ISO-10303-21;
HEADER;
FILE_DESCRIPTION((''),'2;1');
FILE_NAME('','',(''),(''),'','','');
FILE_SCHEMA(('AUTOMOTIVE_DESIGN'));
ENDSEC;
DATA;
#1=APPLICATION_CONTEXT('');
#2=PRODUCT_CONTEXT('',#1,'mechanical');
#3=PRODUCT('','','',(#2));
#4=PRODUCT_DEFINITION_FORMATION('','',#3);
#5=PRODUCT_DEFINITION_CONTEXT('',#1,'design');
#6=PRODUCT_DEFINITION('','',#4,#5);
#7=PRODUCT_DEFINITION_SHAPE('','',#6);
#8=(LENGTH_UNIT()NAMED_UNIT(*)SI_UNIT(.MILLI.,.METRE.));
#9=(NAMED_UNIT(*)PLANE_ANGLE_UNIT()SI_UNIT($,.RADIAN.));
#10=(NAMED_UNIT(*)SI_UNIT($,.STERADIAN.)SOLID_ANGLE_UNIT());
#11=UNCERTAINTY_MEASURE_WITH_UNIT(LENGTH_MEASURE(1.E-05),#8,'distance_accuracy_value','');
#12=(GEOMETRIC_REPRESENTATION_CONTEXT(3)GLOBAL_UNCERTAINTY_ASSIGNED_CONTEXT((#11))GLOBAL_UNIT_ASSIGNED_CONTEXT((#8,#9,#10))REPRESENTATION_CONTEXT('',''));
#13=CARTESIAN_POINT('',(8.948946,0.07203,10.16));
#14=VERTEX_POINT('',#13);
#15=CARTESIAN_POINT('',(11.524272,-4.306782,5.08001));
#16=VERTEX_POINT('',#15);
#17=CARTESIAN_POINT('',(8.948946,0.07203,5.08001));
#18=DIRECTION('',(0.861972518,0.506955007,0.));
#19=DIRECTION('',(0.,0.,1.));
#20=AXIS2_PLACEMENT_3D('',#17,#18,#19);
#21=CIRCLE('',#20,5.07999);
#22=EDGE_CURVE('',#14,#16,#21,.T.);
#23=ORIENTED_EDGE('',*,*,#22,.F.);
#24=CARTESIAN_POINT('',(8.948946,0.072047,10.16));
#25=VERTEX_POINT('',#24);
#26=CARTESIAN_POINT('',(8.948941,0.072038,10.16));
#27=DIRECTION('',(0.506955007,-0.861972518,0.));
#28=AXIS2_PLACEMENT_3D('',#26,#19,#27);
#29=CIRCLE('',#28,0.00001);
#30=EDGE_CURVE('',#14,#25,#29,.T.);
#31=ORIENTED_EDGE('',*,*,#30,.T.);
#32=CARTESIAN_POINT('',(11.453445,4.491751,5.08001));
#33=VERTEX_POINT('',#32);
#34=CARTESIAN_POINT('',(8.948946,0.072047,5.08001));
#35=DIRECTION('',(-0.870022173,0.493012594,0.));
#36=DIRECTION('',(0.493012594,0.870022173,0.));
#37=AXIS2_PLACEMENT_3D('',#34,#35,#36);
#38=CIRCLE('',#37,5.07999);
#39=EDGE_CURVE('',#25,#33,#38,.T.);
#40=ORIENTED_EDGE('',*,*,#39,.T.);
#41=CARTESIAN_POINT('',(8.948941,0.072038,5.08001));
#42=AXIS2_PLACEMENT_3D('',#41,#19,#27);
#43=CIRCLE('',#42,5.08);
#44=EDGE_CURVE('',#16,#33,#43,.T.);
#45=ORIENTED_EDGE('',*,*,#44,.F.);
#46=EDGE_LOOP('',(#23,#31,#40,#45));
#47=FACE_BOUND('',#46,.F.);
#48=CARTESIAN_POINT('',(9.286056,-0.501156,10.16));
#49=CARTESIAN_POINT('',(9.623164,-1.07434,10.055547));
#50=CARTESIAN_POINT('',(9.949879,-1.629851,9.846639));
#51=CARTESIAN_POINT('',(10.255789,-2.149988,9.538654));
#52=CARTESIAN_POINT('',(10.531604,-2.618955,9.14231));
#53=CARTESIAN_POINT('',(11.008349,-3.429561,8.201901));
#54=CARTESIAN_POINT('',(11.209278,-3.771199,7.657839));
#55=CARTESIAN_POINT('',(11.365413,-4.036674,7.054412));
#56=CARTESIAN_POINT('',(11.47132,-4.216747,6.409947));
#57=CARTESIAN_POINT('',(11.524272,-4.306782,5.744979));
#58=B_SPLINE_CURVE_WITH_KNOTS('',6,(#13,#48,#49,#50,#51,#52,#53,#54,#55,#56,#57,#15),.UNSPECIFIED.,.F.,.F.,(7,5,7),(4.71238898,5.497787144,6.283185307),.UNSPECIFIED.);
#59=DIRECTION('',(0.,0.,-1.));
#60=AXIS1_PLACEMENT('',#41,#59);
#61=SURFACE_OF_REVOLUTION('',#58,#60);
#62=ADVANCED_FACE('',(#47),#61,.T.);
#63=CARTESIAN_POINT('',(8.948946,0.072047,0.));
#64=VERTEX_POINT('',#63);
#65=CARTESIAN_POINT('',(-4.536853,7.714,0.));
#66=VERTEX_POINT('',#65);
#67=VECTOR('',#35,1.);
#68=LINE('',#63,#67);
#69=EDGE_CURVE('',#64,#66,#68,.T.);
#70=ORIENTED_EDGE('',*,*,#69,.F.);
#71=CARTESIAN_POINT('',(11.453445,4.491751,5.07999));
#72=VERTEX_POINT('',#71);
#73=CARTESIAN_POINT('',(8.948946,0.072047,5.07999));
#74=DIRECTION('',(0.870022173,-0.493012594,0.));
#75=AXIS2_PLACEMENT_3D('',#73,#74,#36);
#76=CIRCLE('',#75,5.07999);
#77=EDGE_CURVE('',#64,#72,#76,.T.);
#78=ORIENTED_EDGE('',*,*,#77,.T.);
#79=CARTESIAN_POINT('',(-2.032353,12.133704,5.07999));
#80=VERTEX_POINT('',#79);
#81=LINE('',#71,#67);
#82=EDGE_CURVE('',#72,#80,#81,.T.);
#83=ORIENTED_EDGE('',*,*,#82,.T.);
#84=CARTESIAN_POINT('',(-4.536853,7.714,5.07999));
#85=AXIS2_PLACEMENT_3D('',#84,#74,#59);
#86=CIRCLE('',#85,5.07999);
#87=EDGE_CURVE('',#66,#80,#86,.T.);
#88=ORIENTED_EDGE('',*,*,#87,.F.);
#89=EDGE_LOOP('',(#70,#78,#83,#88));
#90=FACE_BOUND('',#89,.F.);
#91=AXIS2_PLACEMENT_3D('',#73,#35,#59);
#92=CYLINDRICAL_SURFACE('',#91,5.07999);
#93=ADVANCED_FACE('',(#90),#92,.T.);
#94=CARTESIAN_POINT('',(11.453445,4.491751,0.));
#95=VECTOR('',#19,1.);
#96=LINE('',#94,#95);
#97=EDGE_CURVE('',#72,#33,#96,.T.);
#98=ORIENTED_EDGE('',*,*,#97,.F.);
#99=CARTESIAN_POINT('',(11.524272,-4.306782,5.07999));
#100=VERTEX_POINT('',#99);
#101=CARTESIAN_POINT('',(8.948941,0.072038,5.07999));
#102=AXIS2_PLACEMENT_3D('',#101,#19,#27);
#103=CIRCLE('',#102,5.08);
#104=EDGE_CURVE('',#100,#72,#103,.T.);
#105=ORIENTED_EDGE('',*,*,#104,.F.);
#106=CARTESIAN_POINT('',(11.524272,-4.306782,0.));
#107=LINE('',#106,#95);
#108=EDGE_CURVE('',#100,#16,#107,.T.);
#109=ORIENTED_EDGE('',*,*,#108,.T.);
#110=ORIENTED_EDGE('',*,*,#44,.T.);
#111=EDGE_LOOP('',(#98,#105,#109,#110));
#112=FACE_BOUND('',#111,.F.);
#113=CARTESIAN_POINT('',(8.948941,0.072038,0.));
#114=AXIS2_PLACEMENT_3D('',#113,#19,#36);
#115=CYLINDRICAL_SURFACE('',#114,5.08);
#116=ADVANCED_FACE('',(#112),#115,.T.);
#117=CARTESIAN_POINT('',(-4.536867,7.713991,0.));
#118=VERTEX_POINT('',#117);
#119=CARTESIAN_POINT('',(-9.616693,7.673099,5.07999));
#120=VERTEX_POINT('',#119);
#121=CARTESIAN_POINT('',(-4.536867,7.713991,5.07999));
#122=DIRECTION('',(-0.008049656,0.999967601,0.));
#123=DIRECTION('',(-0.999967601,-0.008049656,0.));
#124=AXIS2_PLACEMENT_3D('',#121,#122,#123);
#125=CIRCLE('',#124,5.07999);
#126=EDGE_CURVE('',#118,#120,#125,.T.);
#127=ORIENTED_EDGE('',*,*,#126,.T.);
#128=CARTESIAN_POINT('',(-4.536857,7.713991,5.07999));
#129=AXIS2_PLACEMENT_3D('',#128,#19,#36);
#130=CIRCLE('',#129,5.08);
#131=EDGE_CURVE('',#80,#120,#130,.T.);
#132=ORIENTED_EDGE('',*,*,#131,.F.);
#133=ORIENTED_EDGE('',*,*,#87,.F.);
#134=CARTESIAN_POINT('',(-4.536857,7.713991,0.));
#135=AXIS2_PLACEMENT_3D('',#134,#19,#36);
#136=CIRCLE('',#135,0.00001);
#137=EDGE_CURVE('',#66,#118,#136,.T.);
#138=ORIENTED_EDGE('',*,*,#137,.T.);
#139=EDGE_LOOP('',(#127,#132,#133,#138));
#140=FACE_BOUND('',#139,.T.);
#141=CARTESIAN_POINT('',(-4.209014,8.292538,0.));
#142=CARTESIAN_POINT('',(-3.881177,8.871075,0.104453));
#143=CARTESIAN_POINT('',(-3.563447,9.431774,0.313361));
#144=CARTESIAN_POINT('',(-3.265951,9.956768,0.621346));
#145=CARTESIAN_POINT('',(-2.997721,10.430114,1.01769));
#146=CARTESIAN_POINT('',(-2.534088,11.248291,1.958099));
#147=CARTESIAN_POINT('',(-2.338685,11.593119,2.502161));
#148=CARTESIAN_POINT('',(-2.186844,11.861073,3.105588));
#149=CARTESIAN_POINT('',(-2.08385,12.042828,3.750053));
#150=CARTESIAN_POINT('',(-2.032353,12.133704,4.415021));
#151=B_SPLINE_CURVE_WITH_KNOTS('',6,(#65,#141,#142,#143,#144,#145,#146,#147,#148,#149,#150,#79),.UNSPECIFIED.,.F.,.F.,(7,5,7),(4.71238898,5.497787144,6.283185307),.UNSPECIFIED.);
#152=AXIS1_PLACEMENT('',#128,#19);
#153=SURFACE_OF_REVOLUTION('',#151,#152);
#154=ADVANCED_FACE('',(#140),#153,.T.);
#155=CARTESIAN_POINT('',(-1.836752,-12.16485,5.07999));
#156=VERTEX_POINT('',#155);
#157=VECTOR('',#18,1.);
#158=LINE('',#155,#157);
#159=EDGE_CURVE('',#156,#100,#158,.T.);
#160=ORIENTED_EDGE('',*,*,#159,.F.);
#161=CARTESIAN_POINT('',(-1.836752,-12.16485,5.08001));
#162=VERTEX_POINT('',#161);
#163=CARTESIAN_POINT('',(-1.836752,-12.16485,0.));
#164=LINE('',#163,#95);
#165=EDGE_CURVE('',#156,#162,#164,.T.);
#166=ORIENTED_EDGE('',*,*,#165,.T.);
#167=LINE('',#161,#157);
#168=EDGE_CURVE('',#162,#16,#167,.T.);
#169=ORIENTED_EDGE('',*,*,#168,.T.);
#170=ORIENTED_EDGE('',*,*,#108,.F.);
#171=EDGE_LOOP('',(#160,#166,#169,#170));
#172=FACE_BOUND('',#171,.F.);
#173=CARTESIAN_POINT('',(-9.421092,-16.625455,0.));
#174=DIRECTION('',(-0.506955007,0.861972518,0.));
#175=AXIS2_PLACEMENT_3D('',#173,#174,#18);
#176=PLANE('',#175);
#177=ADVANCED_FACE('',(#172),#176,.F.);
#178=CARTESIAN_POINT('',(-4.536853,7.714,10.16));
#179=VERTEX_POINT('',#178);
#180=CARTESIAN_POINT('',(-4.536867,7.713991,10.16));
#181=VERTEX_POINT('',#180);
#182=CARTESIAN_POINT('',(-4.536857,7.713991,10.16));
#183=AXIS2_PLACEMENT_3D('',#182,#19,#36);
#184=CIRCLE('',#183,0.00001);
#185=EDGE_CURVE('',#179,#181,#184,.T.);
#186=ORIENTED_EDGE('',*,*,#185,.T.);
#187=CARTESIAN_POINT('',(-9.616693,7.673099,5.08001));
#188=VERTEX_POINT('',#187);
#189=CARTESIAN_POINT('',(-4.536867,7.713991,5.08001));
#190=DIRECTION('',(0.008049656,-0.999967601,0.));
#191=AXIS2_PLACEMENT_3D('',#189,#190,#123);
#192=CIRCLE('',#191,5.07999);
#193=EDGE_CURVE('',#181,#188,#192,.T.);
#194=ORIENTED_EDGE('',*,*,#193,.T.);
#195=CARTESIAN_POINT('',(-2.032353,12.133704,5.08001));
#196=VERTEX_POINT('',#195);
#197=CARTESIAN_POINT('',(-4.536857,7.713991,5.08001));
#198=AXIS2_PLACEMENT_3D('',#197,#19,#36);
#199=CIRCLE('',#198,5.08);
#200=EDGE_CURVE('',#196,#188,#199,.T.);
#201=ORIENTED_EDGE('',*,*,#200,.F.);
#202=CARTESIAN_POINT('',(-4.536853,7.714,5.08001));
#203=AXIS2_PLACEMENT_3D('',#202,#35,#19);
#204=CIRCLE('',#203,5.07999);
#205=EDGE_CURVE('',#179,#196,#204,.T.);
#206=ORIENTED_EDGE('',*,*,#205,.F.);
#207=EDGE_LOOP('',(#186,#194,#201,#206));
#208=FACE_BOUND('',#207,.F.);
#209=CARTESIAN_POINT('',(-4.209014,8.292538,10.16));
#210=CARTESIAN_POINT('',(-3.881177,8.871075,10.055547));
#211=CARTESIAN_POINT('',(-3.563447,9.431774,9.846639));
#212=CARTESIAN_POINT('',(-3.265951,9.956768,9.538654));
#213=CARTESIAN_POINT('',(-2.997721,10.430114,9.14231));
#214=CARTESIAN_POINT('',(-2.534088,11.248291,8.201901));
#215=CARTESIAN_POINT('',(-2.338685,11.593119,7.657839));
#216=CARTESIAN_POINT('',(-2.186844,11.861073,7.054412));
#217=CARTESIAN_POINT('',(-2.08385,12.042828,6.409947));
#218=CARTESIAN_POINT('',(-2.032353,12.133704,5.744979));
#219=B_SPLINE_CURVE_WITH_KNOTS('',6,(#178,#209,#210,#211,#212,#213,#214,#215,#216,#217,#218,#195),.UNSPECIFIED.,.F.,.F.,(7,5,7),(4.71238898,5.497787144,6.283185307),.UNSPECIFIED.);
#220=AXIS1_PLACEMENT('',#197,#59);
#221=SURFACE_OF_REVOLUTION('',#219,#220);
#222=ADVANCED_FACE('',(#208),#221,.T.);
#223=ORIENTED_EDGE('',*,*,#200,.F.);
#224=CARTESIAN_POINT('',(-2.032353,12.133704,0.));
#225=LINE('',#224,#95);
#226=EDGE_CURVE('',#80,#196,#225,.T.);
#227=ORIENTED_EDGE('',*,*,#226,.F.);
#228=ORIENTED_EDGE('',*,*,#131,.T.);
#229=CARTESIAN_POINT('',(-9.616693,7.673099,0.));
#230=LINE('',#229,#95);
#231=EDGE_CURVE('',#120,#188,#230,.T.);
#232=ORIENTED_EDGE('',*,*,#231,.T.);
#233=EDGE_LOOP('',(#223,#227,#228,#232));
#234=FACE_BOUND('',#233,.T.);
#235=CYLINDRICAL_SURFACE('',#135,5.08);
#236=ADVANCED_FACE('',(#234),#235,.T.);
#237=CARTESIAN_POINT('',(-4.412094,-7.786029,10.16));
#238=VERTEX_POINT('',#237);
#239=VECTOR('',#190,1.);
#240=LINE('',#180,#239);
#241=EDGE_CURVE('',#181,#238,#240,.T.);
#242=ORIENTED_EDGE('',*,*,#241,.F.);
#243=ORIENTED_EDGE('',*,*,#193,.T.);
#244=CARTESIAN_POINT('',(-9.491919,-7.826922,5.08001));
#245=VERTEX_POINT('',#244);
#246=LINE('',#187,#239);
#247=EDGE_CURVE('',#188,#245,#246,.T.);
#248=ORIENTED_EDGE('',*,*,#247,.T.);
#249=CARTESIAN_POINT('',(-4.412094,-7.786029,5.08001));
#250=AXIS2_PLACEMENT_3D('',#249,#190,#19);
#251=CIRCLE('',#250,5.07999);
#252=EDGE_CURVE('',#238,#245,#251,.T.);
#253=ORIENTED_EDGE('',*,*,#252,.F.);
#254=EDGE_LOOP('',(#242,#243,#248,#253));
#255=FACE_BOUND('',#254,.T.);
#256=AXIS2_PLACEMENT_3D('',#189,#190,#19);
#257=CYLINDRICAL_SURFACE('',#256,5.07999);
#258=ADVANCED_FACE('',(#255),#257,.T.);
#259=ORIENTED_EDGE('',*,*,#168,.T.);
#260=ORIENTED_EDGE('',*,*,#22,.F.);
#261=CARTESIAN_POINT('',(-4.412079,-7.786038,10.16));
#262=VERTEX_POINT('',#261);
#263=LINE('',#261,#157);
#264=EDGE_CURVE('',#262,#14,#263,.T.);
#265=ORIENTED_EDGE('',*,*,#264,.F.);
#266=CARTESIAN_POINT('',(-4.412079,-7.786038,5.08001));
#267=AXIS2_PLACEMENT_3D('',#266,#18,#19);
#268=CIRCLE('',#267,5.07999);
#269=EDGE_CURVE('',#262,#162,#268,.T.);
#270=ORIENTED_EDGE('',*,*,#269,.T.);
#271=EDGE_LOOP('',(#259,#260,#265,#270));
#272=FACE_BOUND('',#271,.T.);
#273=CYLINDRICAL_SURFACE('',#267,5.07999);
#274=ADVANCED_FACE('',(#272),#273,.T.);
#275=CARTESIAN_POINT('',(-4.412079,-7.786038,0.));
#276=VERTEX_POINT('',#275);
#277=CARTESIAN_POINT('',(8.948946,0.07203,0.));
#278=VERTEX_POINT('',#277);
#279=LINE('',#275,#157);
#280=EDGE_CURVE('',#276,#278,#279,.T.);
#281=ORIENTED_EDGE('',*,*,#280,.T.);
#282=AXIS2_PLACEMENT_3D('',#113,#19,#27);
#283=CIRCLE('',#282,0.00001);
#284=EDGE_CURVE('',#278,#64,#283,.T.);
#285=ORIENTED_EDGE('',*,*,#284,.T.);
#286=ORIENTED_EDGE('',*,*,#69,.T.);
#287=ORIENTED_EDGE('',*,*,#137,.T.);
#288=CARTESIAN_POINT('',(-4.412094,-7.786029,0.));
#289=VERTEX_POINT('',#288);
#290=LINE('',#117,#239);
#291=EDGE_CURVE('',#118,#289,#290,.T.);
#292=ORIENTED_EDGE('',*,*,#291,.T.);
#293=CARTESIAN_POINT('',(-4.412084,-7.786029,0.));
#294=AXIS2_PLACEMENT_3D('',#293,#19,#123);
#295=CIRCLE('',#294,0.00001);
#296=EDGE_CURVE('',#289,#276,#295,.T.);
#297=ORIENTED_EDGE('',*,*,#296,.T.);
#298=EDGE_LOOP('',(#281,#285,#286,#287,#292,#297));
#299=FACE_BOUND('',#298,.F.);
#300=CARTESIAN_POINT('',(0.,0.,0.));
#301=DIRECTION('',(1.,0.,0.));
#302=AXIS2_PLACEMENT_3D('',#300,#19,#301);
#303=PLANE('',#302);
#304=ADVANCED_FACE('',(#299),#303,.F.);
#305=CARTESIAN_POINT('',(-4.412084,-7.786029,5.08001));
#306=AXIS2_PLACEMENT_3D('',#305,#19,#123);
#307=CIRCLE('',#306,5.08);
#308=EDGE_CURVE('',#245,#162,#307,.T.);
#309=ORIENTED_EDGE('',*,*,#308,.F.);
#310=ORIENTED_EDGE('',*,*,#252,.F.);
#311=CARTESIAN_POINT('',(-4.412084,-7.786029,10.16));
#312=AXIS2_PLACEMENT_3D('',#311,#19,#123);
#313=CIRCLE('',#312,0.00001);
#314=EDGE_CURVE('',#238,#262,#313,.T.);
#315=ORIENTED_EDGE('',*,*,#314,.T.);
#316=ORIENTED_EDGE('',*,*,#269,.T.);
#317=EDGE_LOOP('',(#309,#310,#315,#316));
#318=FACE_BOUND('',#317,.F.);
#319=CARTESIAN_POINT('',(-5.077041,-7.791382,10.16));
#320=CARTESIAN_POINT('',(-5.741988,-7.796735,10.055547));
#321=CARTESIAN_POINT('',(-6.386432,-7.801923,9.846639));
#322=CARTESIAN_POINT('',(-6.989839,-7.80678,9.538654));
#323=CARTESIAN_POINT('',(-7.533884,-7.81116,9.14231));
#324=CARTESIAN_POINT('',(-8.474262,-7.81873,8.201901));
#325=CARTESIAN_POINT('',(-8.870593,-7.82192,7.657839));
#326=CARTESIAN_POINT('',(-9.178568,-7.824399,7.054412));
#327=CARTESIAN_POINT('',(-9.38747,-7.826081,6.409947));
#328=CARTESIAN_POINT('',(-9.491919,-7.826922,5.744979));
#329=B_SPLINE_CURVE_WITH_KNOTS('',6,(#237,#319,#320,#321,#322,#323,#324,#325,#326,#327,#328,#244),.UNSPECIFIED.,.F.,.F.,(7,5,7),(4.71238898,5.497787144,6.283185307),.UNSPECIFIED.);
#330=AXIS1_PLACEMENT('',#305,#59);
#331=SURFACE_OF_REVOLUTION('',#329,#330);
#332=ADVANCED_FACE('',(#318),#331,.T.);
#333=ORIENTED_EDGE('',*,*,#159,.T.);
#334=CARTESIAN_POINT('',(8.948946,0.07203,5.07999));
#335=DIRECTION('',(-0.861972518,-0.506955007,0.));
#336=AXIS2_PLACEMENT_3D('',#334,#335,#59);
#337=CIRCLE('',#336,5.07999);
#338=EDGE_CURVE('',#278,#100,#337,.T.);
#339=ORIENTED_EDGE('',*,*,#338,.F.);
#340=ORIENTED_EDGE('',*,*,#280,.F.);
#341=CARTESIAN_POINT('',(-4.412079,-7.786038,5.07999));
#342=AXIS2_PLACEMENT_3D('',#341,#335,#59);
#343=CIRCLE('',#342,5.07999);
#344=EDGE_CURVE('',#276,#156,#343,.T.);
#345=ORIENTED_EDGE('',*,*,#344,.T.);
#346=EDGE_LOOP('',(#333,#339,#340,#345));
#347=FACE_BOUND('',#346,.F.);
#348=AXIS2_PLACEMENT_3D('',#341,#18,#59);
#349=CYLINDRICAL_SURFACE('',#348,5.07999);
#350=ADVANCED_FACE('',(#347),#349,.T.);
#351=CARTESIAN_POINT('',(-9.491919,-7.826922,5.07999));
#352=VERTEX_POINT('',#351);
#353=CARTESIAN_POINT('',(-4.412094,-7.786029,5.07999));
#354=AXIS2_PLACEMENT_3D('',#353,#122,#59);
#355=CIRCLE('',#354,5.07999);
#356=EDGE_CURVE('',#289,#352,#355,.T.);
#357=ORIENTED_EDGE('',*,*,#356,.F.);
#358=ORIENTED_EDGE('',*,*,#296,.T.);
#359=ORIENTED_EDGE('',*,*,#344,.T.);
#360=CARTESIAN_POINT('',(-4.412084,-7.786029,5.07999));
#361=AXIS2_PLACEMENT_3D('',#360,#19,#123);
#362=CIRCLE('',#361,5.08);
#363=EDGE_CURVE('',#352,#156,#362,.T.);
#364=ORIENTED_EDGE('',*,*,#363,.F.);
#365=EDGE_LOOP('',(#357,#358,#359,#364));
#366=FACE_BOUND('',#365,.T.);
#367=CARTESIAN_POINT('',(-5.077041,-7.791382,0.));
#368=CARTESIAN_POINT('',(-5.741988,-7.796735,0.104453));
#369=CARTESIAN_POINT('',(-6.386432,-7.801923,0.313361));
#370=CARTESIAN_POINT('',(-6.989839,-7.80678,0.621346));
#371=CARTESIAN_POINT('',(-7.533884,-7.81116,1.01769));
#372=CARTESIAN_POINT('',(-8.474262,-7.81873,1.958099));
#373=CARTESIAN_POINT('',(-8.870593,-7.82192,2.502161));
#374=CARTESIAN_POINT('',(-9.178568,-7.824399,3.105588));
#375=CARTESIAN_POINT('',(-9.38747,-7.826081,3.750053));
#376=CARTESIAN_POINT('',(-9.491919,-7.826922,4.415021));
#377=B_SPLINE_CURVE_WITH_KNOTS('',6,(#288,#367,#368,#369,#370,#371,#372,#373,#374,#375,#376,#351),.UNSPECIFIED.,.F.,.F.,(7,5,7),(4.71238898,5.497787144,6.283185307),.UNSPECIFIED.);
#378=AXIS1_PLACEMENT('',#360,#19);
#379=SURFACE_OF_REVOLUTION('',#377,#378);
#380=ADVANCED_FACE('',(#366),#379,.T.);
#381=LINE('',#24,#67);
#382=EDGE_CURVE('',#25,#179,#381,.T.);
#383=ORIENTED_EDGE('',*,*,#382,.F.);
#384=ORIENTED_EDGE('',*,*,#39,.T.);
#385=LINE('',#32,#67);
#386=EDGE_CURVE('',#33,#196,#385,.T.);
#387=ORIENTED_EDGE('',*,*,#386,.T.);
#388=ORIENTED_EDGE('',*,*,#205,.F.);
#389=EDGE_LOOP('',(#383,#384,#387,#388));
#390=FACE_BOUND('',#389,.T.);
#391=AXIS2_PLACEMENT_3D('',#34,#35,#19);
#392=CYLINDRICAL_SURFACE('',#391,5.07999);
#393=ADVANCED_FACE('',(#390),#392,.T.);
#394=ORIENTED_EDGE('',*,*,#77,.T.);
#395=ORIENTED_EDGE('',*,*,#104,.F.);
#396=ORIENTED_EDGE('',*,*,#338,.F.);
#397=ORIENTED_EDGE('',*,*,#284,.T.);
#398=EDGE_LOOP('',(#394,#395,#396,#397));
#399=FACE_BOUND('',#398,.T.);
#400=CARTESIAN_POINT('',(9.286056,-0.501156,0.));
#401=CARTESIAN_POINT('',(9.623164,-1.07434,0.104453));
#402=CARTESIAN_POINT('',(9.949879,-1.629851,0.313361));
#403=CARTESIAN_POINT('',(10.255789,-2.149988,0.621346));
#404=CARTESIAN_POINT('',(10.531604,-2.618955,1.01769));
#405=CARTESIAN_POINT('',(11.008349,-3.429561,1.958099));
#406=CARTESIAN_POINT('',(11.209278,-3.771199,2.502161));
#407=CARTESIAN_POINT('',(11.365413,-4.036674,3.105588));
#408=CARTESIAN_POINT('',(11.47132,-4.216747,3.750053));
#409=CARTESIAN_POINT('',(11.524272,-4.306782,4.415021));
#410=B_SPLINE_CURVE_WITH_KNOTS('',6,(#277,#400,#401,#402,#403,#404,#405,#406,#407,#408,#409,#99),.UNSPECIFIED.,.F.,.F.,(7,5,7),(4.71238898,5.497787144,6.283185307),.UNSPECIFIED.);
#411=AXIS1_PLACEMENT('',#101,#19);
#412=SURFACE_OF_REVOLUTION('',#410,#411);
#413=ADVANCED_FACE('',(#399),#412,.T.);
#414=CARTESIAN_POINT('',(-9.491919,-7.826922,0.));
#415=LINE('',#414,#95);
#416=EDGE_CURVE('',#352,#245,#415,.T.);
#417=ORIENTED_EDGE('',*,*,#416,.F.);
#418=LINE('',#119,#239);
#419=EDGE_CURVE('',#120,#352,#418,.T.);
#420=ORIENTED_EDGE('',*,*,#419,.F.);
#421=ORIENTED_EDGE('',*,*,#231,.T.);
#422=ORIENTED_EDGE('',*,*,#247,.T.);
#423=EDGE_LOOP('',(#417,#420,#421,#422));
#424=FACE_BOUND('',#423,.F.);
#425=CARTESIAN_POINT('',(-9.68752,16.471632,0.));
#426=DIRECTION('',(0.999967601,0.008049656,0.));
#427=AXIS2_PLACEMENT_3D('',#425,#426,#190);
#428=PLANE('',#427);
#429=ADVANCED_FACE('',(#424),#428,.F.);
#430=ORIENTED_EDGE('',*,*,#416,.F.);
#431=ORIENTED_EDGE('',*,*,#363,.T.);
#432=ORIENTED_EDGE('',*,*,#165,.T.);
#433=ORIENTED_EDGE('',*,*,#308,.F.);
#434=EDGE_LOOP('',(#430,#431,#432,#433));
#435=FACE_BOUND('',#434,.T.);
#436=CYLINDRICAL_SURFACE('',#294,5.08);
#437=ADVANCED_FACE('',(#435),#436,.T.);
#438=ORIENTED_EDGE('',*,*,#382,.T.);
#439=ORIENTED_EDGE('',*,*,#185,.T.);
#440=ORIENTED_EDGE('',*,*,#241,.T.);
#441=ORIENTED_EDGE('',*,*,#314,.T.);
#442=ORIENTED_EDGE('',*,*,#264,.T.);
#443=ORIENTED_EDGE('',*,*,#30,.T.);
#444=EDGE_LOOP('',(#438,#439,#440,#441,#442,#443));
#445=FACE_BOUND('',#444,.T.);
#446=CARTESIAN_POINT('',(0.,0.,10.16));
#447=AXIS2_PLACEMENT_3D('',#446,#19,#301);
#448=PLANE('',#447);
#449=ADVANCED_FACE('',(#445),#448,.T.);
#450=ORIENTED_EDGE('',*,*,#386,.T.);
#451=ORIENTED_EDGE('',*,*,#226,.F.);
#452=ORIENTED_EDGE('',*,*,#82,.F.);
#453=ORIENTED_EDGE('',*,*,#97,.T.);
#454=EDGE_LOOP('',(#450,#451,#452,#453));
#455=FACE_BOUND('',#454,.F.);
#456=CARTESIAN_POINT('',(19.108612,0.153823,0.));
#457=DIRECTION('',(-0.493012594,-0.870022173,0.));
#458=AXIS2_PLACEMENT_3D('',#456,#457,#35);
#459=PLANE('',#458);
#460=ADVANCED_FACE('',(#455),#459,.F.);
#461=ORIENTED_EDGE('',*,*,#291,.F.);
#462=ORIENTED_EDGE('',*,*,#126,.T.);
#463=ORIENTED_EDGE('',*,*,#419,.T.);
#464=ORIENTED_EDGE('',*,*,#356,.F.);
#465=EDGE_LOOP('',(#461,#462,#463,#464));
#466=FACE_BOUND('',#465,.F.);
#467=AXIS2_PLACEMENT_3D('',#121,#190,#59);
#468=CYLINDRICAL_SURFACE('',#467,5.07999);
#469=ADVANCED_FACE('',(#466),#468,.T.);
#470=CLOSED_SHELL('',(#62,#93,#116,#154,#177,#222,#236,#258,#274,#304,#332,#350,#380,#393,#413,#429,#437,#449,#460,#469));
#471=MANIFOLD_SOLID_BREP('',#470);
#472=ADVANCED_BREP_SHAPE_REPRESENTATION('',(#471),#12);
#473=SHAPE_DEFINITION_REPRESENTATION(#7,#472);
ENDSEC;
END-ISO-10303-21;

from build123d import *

# Parameters (mm, degrees)
F1_DEPTH = 10.16
F2_R     = 5.08
F3_R     = 5.07999


# Not quite as in the source:
# - a fillet or chamfer is up to 0.001 mm smaller than in the source, because OpenCascade refuses the exact size


with BuildPart() as f1:
    # F0 (on Top) → F1 (new body)
    with BuildSketch(Plane.XY):
        Polygon((19.1086118392, 0.1538227311), (-9.6875203124, 16.4716319182), (-9.4210915267, -16.6254546493), align=None)
    extrude(amount=F1_DEPTH)

    # F2
    f2_edges = [f1.edges().sort_by_distance(p)[0] for p in [
        (-9.421092, -16.625455, 5.08),
        (19.108612, 0.153823, 5.08),
        (-9.68752, 16.471632, 5.08),
    ]]
    fillet(f2_edges, radius=F2_R)

    # F3 (radius 5.08 in the source; OpenCascade refuses exactly that, so slightly less here)
    f3_edges = [f1.edges().sort_by_distance(p)[0] for p in [
        (4.84376, -8.235816, 0),
        (-6.916588, -12.205742, 0),
        (14.028776, 0.11293, 0),
        (-9.554306, -0.076911, 0),
        (4.710546, 8.312727, 0),
        (-7.112189, 12.092812, 0),
        (4.84376, -8.235816, 10.16),
        (-6.916588, -12.205742, 10.16),
        (14.028776, 0.11293, 10.16),
        (-9.554306, -0.076911, 10.16),
        (4.710546, 8.312727, 10.16),
        (-7.112189, 12.092812, 10.16),
    ]]
    fillet(f3_edges, radius=F3_R)


solid = f1.part
